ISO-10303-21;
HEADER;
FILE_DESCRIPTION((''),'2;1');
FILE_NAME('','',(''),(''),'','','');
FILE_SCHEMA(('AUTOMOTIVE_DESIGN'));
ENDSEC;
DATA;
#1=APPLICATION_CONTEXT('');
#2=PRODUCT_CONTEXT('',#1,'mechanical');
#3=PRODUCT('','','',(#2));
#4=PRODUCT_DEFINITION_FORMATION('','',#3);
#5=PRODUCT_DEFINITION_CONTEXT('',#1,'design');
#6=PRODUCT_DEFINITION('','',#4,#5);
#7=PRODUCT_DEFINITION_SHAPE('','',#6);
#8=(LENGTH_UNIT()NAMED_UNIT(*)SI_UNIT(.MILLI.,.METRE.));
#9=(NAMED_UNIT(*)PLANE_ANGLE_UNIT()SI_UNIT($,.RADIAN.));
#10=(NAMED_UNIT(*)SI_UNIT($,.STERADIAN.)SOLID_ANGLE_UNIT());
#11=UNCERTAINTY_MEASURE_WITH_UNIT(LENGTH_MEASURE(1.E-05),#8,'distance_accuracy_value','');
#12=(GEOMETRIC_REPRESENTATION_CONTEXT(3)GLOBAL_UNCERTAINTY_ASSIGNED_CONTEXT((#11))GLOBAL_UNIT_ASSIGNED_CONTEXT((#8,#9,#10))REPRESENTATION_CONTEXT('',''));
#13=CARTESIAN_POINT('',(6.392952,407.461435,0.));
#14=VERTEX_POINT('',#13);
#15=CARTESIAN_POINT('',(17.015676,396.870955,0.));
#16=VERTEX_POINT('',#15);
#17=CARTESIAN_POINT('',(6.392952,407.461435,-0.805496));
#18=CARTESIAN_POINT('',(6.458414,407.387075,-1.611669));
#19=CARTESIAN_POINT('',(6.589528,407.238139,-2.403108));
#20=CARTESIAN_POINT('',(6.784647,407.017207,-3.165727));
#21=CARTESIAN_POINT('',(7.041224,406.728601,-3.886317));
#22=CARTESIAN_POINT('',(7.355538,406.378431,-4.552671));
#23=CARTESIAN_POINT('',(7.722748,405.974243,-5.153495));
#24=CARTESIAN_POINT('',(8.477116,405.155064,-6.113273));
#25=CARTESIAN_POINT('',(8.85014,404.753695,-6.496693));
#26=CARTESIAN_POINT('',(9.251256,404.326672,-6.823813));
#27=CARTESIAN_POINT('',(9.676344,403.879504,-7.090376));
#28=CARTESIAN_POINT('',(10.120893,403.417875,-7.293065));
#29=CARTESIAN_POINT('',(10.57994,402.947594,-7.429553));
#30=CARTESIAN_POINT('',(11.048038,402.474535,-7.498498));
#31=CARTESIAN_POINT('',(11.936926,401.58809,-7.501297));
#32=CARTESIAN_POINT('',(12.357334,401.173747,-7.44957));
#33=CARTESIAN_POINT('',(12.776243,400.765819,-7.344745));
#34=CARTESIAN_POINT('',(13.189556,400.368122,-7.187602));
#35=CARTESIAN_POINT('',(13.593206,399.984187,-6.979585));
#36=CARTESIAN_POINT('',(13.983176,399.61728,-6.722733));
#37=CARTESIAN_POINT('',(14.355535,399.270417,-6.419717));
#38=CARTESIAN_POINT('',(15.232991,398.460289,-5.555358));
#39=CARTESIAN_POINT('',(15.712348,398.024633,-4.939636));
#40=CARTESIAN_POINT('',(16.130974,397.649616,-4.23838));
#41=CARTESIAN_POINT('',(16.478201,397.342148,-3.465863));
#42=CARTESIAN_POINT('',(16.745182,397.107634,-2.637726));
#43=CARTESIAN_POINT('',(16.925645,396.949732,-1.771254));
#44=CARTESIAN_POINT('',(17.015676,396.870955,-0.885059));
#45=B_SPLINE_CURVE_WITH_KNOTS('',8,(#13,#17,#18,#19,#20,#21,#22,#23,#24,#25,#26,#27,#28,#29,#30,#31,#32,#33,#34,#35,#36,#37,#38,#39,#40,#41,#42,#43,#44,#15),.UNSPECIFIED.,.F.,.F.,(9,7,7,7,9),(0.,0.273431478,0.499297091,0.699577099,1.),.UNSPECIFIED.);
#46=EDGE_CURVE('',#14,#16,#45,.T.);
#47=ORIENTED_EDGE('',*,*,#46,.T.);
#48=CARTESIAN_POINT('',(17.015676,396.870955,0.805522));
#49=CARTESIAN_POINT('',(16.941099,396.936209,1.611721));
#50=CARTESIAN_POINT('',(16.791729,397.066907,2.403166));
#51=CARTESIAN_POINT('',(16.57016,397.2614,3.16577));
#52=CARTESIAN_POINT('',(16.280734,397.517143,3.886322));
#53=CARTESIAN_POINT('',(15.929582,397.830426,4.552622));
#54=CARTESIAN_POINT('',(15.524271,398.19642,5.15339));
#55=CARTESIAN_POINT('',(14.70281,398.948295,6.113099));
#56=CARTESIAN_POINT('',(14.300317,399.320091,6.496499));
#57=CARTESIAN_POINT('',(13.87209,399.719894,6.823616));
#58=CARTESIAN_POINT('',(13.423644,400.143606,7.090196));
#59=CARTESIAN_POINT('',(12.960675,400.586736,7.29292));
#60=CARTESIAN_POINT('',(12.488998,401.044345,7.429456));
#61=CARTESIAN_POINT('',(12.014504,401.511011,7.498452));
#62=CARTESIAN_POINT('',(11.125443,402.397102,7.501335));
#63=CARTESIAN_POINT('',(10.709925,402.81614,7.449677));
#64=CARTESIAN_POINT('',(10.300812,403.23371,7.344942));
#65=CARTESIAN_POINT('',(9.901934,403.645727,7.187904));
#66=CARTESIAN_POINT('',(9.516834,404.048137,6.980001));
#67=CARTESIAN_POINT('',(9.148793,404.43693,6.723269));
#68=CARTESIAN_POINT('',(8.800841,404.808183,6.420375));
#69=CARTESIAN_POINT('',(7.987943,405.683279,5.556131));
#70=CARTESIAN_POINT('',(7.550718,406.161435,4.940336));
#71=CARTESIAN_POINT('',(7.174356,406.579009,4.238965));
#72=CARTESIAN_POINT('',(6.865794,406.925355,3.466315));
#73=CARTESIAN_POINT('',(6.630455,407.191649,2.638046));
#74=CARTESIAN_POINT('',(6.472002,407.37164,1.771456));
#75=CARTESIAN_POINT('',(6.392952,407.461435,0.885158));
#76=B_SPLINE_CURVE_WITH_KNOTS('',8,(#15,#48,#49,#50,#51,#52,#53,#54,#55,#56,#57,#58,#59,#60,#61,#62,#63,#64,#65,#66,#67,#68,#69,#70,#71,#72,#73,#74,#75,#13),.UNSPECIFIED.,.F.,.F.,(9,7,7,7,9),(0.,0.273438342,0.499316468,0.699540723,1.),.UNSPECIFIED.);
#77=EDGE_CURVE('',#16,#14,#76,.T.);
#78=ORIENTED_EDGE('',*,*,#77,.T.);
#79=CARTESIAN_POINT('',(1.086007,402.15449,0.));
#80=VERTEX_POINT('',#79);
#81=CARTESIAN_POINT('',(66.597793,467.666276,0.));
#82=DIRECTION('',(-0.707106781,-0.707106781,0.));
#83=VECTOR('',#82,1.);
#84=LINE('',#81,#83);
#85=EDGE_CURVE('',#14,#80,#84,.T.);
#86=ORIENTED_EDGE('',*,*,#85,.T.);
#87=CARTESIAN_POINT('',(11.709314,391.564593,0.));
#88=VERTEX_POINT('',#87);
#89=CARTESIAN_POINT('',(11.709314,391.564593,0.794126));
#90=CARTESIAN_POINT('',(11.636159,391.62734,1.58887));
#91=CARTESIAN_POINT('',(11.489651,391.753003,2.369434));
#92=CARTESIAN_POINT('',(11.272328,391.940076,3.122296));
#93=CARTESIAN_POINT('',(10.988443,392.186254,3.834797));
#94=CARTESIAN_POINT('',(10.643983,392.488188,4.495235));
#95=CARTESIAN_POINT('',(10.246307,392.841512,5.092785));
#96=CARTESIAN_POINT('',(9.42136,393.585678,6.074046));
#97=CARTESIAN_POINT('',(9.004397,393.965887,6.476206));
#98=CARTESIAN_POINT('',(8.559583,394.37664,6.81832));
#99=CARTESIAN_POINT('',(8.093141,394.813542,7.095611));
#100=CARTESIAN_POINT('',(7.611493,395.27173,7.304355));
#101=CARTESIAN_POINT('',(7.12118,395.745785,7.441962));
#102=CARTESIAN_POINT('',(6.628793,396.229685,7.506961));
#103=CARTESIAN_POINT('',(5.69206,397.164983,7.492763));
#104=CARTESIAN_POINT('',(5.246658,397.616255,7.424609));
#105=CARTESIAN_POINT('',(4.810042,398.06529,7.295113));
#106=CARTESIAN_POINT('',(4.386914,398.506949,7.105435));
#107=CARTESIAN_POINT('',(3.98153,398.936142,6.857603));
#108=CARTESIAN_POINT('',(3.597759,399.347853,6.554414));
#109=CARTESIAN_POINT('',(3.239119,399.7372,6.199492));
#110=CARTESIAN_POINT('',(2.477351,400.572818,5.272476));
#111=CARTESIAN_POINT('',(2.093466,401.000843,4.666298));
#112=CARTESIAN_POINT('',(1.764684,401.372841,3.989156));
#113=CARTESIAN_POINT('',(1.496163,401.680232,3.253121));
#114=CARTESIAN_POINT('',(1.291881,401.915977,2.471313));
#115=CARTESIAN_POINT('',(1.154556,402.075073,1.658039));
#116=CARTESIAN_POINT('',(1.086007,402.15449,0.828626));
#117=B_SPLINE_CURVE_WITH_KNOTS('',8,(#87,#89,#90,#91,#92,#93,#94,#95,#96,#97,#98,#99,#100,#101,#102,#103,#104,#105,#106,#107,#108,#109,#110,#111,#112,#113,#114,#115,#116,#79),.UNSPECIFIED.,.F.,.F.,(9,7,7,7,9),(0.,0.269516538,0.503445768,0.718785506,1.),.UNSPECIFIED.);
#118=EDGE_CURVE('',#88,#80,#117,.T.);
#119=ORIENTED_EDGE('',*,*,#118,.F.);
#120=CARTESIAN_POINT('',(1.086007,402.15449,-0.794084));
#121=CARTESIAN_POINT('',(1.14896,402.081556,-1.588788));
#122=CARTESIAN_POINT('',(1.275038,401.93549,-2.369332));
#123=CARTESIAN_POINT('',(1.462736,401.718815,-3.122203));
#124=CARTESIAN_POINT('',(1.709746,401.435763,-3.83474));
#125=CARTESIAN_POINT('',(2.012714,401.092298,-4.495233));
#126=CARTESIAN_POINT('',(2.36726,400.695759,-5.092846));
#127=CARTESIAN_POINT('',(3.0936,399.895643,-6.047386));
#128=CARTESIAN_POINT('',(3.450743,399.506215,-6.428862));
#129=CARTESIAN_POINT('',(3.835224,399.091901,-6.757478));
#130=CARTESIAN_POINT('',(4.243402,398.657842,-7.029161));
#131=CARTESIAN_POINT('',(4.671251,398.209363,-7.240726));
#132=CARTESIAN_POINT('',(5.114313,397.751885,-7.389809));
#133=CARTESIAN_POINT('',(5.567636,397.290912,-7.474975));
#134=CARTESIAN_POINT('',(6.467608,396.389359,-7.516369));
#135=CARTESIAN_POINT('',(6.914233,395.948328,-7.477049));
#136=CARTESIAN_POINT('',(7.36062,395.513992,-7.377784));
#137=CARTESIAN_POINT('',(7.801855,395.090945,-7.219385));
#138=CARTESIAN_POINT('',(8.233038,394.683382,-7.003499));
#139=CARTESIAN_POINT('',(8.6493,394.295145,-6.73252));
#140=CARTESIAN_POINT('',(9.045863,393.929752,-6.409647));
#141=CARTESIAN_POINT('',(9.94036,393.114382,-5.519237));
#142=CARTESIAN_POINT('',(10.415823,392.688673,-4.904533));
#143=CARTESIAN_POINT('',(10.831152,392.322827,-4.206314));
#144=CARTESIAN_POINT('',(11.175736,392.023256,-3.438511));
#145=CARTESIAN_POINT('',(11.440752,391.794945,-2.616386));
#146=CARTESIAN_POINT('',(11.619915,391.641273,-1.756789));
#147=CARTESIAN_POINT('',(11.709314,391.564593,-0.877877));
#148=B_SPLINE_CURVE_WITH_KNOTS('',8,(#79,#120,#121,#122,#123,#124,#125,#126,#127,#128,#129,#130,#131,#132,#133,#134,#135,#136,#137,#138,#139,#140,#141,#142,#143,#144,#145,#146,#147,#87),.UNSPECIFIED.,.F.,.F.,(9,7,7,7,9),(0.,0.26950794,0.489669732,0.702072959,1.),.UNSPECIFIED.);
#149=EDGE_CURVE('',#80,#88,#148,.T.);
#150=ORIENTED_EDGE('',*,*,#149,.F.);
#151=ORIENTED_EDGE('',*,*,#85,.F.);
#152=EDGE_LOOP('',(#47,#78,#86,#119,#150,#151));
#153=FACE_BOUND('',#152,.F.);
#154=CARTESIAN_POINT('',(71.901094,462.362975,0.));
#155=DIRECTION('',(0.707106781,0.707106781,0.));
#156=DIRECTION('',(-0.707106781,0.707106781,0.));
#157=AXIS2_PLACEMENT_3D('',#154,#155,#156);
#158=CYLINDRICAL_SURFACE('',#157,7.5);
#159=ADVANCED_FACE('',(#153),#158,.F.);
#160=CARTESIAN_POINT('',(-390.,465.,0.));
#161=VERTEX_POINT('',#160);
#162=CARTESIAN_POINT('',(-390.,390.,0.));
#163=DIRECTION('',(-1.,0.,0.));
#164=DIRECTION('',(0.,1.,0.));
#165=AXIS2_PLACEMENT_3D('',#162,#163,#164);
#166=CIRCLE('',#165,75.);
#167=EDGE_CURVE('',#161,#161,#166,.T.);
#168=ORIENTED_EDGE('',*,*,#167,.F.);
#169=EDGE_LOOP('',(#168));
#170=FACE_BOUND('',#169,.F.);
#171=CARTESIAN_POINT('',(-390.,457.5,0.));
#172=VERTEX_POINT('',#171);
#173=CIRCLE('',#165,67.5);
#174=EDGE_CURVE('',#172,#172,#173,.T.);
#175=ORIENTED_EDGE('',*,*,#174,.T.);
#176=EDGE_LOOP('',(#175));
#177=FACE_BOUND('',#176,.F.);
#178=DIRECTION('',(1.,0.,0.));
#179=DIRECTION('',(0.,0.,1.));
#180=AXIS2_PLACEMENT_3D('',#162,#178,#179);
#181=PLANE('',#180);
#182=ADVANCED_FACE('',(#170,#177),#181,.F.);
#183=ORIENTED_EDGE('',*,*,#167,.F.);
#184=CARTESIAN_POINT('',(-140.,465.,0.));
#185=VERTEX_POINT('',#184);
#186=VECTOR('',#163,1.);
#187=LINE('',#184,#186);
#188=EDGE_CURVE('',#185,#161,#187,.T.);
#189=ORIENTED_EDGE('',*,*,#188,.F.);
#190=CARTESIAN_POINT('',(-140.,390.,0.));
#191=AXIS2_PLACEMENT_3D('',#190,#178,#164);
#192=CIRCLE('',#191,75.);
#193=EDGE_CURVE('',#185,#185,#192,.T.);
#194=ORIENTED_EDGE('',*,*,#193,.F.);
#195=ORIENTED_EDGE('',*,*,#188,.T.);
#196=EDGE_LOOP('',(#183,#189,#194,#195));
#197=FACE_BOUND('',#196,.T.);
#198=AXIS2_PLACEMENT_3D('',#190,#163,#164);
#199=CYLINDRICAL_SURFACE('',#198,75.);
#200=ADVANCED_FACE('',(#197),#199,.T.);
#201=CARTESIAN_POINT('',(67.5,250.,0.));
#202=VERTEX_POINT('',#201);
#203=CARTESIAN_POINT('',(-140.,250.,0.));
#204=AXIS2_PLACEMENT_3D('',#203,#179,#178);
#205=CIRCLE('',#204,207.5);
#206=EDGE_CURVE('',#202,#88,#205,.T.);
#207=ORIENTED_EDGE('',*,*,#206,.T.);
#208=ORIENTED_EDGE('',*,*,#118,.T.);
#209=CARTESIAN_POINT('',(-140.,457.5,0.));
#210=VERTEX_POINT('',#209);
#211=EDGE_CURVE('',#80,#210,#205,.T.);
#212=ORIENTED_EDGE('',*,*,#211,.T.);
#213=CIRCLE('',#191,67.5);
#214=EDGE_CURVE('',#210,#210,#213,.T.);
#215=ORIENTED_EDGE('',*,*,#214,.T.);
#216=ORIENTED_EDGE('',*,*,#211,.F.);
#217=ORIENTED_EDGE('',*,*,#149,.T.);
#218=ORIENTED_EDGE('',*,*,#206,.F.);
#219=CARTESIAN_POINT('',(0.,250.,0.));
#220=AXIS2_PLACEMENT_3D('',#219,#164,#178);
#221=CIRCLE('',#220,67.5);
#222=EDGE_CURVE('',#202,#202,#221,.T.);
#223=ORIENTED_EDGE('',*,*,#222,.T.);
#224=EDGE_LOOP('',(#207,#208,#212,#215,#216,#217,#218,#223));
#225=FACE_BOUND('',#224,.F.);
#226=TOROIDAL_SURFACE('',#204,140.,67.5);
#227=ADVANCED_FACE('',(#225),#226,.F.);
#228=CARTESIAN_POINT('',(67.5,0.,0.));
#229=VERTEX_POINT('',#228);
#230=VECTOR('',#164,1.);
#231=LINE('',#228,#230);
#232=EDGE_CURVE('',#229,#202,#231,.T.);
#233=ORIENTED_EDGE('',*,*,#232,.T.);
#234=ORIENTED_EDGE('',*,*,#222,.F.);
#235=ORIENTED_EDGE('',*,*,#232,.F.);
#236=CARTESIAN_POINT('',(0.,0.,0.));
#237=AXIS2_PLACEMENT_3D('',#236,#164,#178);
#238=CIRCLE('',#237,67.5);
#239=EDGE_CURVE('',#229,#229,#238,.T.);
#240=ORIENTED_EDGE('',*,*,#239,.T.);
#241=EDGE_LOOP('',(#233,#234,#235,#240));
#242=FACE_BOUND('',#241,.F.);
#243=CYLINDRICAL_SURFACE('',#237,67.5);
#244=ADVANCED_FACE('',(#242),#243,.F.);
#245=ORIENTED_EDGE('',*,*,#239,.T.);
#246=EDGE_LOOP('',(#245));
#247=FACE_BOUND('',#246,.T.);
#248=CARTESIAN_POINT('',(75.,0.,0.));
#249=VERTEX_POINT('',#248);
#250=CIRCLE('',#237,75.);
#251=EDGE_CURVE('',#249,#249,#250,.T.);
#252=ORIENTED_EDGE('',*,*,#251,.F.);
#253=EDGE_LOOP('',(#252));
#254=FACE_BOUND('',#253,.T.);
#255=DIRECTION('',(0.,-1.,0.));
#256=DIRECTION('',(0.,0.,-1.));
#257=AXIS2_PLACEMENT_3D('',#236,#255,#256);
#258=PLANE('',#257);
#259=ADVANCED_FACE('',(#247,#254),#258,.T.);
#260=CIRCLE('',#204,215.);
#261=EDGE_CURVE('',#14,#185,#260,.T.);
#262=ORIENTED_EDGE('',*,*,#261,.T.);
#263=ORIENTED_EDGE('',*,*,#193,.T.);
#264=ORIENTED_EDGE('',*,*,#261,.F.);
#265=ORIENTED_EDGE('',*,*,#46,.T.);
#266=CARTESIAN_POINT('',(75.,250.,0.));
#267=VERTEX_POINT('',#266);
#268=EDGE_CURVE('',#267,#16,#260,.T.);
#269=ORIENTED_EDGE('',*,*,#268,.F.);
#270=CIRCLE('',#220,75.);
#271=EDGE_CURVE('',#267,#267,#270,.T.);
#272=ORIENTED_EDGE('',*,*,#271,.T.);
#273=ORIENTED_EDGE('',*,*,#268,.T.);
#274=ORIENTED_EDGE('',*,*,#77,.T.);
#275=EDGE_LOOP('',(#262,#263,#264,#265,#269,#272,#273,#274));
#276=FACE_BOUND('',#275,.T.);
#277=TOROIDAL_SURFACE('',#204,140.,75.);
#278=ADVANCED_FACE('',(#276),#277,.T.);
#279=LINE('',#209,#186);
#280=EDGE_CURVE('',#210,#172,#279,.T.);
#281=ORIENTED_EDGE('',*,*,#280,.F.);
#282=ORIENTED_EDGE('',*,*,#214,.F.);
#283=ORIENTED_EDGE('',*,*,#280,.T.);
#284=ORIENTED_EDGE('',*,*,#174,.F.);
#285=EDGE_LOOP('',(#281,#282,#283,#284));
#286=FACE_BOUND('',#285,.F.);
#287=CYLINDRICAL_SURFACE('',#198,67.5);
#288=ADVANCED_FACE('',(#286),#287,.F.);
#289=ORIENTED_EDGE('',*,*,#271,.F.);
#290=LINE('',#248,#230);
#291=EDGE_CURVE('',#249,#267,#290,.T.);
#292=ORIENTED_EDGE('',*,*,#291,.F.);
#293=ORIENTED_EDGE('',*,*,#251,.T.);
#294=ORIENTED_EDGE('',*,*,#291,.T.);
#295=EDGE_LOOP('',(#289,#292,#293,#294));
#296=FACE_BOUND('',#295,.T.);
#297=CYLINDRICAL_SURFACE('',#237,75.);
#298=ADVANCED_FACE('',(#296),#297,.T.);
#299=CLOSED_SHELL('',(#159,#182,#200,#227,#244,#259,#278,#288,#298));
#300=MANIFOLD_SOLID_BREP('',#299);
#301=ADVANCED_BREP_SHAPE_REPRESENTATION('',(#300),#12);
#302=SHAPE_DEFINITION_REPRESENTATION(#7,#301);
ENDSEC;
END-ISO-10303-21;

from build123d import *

# Parameters (mm, degrees)
F0_R     = 75
F0_R_2   = 67.5
F5_R     = 7.5
F6_DEPTH = 150


with BuildPart() as f2:
    # F2: sweep along a path in F1
    with BuildLine(Plane.XY) as f2_path:
        Line((0, 0), (0, 250))
        ThreePointArc((0, 250), (-41.0050506339, 348.9949493661), (-140, 390))
        Line((-140, 390), (-390, 390))
    # F0 (on Front) → F2 (sweep)
    with BuildSketch(Plane.XZ):
        Circle(F0_R)
        Circle(F0_R_2, mode=Mode.SUBTRACT)
    sweep(path=f2_path.line)

    # F5 (on face) → F6 (cut)
    with BuildSketch(Plane(origin=(267.132034356, 267.132034356, 0), x_dir=(-0.7071067812, 0.7071067812, 0), z_dir=(0.7071067812, 0.7071067812, 0))):
        with Locations((276.0982438922, 0)):
            Circle(F5_R)
    extrude(amount=-F6_DEPTH, mode=Mode.SUBTRACT)


solid = f2.part
